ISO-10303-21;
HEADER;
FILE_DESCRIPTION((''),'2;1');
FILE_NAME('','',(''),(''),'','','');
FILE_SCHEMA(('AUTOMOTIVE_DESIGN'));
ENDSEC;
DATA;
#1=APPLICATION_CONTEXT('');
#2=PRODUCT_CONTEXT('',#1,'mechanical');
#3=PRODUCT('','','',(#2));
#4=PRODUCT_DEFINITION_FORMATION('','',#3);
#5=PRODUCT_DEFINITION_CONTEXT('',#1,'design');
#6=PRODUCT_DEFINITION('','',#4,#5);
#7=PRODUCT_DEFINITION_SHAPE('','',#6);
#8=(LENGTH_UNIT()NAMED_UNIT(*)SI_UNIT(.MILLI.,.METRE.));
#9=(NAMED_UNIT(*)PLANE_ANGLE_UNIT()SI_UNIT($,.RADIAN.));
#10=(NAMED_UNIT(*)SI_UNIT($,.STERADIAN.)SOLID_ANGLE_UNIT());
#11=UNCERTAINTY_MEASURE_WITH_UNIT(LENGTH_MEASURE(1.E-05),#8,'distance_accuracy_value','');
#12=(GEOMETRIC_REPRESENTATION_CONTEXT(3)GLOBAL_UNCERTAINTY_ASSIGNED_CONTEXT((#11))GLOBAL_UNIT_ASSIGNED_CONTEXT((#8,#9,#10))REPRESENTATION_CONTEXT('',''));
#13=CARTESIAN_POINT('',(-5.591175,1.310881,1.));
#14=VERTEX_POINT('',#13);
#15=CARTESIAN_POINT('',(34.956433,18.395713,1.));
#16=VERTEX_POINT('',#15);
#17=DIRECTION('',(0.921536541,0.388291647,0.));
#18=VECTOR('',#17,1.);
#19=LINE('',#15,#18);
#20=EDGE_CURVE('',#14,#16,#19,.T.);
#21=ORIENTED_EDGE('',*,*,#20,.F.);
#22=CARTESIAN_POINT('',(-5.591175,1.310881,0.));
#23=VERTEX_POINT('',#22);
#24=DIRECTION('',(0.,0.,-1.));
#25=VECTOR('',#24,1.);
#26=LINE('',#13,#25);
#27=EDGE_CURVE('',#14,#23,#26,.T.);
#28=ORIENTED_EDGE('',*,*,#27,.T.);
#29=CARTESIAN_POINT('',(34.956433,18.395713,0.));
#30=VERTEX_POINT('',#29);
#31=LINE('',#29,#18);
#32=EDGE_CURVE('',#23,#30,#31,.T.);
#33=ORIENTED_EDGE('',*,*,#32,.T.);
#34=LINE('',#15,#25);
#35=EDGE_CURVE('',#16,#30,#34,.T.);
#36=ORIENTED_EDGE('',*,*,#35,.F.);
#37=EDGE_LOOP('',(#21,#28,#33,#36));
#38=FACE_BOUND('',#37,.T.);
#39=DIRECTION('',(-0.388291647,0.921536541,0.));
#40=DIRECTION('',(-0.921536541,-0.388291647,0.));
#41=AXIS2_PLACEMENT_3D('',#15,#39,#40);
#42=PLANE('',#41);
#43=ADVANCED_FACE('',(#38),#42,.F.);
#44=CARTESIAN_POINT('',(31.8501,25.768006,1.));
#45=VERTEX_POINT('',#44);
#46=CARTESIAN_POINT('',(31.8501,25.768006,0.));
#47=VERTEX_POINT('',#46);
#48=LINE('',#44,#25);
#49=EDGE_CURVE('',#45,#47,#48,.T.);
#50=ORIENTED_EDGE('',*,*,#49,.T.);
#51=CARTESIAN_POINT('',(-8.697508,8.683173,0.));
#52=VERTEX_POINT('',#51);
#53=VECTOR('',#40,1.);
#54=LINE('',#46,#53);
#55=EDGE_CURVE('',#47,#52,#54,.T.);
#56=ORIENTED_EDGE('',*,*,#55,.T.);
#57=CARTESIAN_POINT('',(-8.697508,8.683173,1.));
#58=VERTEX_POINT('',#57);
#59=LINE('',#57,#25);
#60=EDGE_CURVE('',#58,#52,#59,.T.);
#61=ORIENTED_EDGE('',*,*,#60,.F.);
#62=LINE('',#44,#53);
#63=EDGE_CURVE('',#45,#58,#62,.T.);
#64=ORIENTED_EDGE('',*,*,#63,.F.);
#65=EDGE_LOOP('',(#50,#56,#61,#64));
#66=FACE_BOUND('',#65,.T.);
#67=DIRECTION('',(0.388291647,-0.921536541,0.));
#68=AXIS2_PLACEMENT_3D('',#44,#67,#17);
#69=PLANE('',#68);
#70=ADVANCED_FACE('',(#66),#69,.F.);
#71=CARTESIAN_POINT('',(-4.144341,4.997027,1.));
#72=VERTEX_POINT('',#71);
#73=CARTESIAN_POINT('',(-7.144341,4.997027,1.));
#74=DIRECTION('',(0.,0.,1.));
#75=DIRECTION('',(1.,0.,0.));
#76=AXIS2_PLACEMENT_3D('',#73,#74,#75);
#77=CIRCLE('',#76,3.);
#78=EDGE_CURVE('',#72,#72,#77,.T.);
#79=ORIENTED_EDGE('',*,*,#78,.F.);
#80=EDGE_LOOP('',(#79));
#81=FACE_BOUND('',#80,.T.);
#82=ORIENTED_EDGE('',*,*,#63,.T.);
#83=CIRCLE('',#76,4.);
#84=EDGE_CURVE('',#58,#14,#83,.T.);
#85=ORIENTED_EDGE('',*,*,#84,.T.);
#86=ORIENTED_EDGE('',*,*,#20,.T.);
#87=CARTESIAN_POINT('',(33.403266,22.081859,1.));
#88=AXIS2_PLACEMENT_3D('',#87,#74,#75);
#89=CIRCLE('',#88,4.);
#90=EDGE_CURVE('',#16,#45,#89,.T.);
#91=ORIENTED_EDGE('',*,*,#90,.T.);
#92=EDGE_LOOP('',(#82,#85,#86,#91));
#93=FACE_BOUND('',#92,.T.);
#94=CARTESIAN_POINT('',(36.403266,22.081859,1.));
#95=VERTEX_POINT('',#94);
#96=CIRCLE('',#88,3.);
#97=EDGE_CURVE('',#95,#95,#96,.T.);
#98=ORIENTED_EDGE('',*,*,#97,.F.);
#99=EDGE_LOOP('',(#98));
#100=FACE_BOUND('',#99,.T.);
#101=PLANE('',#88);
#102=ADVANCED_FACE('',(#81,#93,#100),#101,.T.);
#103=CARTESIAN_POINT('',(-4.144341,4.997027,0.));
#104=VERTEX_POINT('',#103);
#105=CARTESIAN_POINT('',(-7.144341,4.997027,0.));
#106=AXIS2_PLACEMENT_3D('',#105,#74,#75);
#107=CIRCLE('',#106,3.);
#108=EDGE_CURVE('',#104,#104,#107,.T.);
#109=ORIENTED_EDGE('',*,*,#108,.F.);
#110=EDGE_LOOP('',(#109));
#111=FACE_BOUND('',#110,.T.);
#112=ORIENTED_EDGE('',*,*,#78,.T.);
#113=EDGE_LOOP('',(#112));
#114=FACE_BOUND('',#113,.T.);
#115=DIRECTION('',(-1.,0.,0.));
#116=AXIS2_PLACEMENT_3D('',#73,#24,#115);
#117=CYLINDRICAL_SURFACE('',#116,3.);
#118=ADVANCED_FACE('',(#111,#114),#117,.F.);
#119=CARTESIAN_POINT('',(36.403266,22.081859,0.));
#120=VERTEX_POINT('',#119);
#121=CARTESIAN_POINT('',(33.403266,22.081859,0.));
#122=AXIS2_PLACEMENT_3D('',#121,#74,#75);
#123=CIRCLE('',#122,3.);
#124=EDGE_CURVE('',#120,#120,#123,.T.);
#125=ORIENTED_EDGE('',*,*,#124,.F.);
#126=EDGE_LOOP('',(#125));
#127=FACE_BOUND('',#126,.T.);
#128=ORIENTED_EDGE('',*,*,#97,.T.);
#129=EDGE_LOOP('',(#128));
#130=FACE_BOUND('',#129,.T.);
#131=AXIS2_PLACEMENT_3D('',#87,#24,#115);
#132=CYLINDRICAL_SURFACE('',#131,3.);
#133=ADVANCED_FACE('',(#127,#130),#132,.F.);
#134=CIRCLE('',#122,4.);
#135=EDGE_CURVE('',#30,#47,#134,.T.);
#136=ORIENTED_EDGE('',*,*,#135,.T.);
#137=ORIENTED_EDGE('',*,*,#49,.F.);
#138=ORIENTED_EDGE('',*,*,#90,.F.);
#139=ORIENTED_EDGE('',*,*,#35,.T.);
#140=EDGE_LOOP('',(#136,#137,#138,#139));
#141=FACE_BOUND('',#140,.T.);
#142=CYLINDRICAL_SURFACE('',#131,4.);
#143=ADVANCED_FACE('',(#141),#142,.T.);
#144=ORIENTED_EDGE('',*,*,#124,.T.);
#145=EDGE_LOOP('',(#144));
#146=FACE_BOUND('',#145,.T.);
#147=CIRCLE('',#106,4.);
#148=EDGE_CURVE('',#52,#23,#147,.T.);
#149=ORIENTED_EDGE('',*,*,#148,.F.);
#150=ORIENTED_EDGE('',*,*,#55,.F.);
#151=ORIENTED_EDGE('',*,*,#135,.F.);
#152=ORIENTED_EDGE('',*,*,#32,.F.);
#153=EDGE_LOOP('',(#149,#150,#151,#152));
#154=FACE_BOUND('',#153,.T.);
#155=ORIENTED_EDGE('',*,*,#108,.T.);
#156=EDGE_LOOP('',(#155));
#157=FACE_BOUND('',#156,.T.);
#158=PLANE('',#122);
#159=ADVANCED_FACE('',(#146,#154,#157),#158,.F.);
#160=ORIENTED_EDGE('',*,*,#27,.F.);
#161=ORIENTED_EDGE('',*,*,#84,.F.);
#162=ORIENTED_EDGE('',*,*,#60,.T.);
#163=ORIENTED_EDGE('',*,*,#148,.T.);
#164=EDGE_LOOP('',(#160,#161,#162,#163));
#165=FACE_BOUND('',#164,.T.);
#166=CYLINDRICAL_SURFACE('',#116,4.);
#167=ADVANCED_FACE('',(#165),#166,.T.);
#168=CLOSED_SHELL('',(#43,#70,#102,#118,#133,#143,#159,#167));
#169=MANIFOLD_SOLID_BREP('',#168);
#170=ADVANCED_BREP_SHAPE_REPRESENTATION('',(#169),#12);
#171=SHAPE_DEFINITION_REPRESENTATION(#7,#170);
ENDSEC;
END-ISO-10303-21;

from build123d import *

# Parameters (mm, degrees)
ESQUISSE1_R               = 3
T_LE_DE_BASE_PLI_E1_DEPTH = 1


# Sheet-metal steps are written as plain solids
with BuildPart() as part:
    # Esquisse1 → Tôle de base pliée1 (new body)
    with BuildSketch(Plane.XY):
        with BuildLine():
            Line((34.956432932, 18.395713176), (-5.591174881, 1.310880702))
            ThreePointArc((-5.591174881, 1.310880702), (-10.830487634, 3.443860278), (-8.697508058, 8.683173031))
            Line((-8.697508058, 8.683173031), (31.850099755, 25.768005506))
            ThreePointArc((31.850099755, 25.768005506), (37.089412508, 23.63502593), (34.956432932, 18.395713176))
        make_face()
        with Locations((33.403266343, 22.081859341)):
            Circle(ESQUISSE1_R, mode=Mode.SUBTRACT)
        with Locations((-7.144341469, 4.997026867)):
            Circle(ESQUISSE1_R, mode=Mode.SUBTRACT)
    extrude(amount=T_LE_DE_BASE_PLI_E1_DEPTH)


solid = part.part
